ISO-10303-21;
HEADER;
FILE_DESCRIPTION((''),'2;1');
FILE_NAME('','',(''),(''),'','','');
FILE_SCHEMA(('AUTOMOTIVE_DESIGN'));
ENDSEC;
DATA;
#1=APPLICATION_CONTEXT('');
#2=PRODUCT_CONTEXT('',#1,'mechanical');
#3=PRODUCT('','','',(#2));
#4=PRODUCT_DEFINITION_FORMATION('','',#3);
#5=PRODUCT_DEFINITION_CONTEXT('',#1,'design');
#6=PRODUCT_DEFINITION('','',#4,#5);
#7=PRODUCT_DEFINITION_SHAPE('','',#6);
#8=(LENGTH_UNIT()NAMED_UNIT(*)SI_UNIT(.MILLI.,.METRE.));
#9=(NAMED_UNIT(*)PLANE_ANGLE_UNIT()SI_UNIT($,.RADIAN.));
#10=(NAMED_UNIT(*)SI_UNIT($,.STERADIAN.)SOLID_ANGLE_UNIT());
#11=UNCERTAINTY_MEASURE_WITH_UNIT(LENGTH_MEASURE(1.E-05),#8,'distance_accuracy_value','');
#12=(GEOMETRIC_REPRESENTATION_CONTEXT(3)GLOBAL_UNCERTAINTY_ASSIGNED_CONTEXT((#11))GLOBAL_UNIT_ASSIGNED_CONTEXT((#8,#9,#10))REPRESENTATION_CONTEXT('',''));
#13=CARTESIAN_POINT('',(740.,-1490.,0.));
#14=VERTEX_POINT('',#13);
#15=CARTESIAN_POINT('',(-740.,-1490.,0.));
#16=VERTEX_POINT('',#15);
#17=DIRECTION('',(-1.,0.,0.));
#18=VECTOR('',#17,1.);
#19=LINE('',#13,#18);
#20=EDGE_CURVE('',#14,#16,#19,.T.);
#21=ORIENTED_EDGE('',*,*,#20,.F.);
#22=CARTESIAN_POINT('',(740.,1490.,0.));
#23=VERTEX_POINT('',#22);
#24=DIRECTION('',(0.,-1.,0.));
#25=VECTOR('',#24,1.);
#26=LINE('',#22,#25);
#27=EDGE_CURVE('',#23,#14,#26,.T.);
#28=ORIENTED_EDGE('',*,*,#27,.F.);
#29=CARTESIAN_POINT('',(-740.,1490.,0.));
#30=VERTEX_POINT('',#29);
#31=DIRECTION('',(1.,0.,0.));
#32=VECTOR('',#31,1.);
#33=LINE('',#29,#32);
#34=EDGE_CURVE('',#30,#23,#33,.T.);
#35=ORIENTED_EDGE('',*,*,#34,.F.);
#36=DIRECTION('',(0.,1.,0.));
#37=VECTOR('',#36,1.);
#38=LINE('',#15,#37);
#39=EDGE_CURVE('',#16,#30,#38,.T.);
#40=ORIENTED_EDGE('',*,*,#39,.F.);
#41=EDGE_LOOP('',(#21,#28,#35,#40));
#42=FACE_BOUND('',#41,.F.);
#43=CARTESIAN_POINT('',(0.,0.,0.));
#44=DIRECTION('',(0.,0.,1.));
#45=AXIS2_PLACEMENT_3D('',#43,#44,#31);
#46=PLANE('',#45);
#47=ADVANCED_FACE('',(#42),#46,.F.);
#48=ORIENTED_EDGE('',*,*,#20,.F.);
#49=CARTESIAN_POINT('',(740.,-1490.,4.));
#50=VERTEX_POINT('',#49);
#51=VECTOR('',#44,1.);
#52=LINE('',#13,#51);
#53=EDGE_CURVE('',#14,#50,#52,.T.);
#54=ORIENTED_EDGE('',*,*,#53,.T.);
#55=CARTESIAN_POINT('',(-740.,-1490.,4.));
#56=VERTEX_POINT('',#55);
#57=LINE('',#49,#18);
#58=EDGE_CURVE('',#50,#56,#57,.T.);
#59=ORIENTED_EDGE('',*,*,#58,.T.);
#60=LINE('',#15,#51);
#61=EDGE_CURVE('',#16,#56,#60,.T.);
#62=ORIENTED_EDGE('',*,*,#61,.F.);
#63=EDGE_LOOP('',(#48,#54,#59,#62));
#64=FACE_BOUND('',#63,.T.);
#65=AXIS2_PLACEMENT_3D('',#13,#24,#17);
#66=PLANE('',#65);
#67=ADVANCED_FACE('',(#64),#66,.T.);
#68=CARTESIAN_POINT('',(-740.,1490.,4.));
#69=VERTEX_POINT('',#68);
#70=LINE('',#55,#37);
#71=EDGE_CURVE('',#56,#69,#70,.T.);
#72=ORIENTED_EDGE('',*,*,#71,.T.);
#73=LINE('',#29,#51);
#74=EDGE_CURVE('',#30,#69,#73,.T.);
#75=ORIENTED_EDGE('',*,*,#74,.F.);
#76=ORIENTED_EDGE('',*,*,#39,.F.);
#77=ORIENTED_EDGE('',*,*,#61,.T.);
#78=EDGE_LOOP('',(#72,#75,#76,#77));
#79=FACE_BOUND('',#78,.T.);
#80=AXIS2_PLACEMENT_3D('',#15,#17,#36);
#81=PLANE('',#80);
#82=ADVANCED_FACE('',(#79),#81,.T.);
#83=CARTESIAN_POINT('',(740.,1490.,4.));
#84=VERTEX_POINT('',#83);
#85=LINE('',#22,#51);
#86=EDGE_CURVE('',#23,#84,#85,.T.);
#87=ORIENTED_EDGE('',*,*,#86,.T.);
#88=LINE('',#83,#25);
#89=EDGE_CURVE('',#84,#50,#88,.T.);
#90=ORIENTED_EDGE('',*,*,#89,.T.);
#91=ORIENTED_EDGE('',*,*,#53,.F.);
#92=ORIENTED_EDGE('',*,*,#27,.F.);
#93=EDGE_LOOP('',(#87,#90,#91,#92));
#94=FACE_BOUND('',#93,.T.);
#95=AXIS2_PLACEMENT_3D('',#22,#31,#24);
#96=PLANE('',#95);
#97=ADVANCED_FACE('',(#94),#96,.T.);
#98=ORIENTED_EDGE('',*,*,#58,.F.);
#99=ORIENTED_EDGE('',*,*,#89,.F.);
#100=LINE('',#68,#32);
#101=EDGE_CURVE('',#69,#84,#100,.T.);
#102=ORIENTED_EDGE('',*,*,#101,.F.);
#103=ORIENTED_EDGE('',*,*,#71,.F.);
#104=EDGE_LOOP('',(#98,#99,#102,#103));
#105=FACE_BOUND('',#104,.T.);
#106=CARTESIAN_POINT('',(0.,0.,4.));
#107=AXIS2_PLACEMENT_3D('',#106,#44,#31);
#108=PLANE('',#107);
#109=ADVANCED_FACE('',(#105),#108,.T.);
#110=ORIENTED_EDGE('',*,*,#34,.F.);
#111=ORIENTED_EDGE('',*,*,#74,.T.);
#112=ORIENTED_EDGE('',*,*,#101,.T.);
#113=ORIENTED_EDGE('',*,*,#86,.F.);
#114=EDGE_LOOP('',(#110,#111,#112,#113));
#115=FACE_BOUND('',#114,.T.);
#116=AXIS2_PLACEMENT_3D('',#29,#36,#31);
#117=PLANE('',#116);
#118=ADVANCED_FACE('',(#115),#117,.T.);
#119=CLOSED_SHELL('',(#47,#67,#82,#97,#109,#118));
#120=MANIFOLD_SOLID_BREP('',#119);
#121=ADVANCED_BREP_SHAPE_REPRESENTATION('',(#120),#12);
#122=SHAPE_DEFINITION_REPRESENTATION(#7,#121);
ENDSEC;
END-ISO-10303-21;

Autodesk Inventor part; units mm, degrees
ref_plane "YZ Plane" through (0, 0, 0) normal (1, 0, 0) x (0, 1, 0)
ref_plane "XZ Plane" through (0, 0, 0) normal (0, 1, 0) x (-1, 0, 0)
ref_plane "XY Plane" through (0, 0, 0) normal (0, 0, 1) x (1, 0, 0)
sketch "Sketch1" plane through (0, 0, 0) normal (0, 0, 1) x (1, 0, 0)
  line L0 (740, -1490) -> (-740, -1490)
  line L1 (-740, -1490) -> (-740, 1490)
  line L2 (-740, 1490) -> (740, 1490)
  line L3 (740, 1490) -> (740, -1490)
  line L4 (740, -1490) -> (-740, 1490) construction
  line L5 (-740, -1490) -> (740, 1490) construction
  point P0 (0, 0)
  dimension "d0" = 1480
  dimension "d1" = 2980
extrude "Plate1" add sketch "Sketch1" along normal blind 4
sketch "Sketch4" plane through (0, 0, 4) normal (0, 0, 1) x (1, 0, 0)
  line L0 (770, 1247.3333) -> (710, 1247.3333) projected
  line L1 (770, 750.6667) -> (710, 750.6667) projected
  line L2 (770, 254) -> (710, 254) projected
  line L3 (770, -242.6667) -> (710, -242.6667) projected
  line L4 (770, -739.3333) -> (710, -739.3333) projected
  line L5 (770, -1236) -> (710, -1236) projected
  ellipse E0 centre (690.2486, 1484) end of major axis (690.2486, 1514) minor radius 0.6803 (690.2486, 1454) -> (690.2486, 1514) ccw projected
  ellipse E1 centre (-310.0086, 1484) end of major axis (-310.0086, 1514) minor radius 0.6803 (-310.0086, 1454) -> (-310.0086, 1514) ccw projected
  line L6 (-710, 1247.3333) -> (-739.3197, 1247.3333) projected
  line L7 (-710, 750.6667) -> (-739.3197, 750.6667) projected
  line L8 (-710, 254) -> (-739.3197, 254) projected
  line L9 (-710, -242.6667) -> (-739.3197, -242.6667) projected
  line L10 (190.12, -1243.5) -> (190.12, -1340.5) projected
  line L11 (-310.0086, -1243.5) -> (-310.0086, -1340.5) projected
  line L12 (690.2486, -1243.5) -> (690.2486, -1340.5) projected
  line L13 (690.2486, -1340.5) -> (686.2496, -1340.5) projected
  line L14 (190.12, -1340.5) -> (186.121, -1340.5) projected
  line L15 (-310.0086, -1340.5) -> (-314.0076, -1340.5) projected
  line L16 (-710, -739.3333) -> (-739.3197, -739.3333) projected
  line L17 (-710, -1236) -> (-739.3197, -1236) projected
  line L18 (690.2486, 1454) -> (686.2496, 1454) projected
  line L19 (710, 1243.3333) -> (710, 1247.3333) projected
  line L20 (190.12, 1454) -> (186.121, 1454) projected
  line L21 (-310.0086, 1454) -> (-314.0076, 1454) projected
  line L22 (-710, 1243.3333) -> (-710, 1247.3333) projected
  line L23 (-710, 746.6667) -> (-710, 750.6667) projected
  line L24 (-710, 250) -> (-710, 254) projected
  line L25 (-710, -743.3333) -> (-710, -739.3333) projected
  line L26 (-710, -1240) -> (-710, -1236) projected
  line L27 (710, -1240) -> (710, -1236) projected
  line L28 (710, -743.3333) -> (710, -739.3333) projected
  line L29 (710, -246.6667) -> (710, -242.6667) projected
  line L30 (710, 250) -> (710, 254) projected
  line L31 (710, 746.6667) -> (710, 750.6667) projected
  ellipse E2 centre (190.12, 1484) end of major axis (190.12, 1514) minor radius 0.6803 (190.12, 1454) -> (190.12, 1514) ccw projected
  line L32 (530.9218, -1356.779) -> (530.9218, -1714.4695) construction
  line L33 (530.9218, -1714.4695) -> (479.354, -1714.4695) construction
  line L34 (479.354, -1714.4695) -> (479.354, -1356.779) construction
  line L35 (479.354, -1356.779) -> (530.9218, -1356.779) construction
  line L36 (-710, -246.6667) -> (-710, -242.6667) projected
  point P0 (0, 0)
mark "Mark2"
equation "\"d0\" = Лист_ширина"
equation "\"d2\" = Thickness"
equation "\"BendRadius\" = Thickness"
equation "\"BendReliefWidth\" = Thickness"
equation "\"BendReliefDepth\" = 0.5 * Thickness"
equation "\"CornerReliefSize\" = 4 * Thickness"
equation "\"MinimumRemnant\" = 2 * Thickness"
equation "\"TransitionRadius\" = BendRadius"
equation "\"JacobiRadiusSize\" = BendRadius"
equation "\"GapSize\" = Thickness"
equation "\"Лист_ширина\" = 1480"
equation "\"Thickness\" = 4"
properties part number "GBK 1211 shield 2" material "Steel"
